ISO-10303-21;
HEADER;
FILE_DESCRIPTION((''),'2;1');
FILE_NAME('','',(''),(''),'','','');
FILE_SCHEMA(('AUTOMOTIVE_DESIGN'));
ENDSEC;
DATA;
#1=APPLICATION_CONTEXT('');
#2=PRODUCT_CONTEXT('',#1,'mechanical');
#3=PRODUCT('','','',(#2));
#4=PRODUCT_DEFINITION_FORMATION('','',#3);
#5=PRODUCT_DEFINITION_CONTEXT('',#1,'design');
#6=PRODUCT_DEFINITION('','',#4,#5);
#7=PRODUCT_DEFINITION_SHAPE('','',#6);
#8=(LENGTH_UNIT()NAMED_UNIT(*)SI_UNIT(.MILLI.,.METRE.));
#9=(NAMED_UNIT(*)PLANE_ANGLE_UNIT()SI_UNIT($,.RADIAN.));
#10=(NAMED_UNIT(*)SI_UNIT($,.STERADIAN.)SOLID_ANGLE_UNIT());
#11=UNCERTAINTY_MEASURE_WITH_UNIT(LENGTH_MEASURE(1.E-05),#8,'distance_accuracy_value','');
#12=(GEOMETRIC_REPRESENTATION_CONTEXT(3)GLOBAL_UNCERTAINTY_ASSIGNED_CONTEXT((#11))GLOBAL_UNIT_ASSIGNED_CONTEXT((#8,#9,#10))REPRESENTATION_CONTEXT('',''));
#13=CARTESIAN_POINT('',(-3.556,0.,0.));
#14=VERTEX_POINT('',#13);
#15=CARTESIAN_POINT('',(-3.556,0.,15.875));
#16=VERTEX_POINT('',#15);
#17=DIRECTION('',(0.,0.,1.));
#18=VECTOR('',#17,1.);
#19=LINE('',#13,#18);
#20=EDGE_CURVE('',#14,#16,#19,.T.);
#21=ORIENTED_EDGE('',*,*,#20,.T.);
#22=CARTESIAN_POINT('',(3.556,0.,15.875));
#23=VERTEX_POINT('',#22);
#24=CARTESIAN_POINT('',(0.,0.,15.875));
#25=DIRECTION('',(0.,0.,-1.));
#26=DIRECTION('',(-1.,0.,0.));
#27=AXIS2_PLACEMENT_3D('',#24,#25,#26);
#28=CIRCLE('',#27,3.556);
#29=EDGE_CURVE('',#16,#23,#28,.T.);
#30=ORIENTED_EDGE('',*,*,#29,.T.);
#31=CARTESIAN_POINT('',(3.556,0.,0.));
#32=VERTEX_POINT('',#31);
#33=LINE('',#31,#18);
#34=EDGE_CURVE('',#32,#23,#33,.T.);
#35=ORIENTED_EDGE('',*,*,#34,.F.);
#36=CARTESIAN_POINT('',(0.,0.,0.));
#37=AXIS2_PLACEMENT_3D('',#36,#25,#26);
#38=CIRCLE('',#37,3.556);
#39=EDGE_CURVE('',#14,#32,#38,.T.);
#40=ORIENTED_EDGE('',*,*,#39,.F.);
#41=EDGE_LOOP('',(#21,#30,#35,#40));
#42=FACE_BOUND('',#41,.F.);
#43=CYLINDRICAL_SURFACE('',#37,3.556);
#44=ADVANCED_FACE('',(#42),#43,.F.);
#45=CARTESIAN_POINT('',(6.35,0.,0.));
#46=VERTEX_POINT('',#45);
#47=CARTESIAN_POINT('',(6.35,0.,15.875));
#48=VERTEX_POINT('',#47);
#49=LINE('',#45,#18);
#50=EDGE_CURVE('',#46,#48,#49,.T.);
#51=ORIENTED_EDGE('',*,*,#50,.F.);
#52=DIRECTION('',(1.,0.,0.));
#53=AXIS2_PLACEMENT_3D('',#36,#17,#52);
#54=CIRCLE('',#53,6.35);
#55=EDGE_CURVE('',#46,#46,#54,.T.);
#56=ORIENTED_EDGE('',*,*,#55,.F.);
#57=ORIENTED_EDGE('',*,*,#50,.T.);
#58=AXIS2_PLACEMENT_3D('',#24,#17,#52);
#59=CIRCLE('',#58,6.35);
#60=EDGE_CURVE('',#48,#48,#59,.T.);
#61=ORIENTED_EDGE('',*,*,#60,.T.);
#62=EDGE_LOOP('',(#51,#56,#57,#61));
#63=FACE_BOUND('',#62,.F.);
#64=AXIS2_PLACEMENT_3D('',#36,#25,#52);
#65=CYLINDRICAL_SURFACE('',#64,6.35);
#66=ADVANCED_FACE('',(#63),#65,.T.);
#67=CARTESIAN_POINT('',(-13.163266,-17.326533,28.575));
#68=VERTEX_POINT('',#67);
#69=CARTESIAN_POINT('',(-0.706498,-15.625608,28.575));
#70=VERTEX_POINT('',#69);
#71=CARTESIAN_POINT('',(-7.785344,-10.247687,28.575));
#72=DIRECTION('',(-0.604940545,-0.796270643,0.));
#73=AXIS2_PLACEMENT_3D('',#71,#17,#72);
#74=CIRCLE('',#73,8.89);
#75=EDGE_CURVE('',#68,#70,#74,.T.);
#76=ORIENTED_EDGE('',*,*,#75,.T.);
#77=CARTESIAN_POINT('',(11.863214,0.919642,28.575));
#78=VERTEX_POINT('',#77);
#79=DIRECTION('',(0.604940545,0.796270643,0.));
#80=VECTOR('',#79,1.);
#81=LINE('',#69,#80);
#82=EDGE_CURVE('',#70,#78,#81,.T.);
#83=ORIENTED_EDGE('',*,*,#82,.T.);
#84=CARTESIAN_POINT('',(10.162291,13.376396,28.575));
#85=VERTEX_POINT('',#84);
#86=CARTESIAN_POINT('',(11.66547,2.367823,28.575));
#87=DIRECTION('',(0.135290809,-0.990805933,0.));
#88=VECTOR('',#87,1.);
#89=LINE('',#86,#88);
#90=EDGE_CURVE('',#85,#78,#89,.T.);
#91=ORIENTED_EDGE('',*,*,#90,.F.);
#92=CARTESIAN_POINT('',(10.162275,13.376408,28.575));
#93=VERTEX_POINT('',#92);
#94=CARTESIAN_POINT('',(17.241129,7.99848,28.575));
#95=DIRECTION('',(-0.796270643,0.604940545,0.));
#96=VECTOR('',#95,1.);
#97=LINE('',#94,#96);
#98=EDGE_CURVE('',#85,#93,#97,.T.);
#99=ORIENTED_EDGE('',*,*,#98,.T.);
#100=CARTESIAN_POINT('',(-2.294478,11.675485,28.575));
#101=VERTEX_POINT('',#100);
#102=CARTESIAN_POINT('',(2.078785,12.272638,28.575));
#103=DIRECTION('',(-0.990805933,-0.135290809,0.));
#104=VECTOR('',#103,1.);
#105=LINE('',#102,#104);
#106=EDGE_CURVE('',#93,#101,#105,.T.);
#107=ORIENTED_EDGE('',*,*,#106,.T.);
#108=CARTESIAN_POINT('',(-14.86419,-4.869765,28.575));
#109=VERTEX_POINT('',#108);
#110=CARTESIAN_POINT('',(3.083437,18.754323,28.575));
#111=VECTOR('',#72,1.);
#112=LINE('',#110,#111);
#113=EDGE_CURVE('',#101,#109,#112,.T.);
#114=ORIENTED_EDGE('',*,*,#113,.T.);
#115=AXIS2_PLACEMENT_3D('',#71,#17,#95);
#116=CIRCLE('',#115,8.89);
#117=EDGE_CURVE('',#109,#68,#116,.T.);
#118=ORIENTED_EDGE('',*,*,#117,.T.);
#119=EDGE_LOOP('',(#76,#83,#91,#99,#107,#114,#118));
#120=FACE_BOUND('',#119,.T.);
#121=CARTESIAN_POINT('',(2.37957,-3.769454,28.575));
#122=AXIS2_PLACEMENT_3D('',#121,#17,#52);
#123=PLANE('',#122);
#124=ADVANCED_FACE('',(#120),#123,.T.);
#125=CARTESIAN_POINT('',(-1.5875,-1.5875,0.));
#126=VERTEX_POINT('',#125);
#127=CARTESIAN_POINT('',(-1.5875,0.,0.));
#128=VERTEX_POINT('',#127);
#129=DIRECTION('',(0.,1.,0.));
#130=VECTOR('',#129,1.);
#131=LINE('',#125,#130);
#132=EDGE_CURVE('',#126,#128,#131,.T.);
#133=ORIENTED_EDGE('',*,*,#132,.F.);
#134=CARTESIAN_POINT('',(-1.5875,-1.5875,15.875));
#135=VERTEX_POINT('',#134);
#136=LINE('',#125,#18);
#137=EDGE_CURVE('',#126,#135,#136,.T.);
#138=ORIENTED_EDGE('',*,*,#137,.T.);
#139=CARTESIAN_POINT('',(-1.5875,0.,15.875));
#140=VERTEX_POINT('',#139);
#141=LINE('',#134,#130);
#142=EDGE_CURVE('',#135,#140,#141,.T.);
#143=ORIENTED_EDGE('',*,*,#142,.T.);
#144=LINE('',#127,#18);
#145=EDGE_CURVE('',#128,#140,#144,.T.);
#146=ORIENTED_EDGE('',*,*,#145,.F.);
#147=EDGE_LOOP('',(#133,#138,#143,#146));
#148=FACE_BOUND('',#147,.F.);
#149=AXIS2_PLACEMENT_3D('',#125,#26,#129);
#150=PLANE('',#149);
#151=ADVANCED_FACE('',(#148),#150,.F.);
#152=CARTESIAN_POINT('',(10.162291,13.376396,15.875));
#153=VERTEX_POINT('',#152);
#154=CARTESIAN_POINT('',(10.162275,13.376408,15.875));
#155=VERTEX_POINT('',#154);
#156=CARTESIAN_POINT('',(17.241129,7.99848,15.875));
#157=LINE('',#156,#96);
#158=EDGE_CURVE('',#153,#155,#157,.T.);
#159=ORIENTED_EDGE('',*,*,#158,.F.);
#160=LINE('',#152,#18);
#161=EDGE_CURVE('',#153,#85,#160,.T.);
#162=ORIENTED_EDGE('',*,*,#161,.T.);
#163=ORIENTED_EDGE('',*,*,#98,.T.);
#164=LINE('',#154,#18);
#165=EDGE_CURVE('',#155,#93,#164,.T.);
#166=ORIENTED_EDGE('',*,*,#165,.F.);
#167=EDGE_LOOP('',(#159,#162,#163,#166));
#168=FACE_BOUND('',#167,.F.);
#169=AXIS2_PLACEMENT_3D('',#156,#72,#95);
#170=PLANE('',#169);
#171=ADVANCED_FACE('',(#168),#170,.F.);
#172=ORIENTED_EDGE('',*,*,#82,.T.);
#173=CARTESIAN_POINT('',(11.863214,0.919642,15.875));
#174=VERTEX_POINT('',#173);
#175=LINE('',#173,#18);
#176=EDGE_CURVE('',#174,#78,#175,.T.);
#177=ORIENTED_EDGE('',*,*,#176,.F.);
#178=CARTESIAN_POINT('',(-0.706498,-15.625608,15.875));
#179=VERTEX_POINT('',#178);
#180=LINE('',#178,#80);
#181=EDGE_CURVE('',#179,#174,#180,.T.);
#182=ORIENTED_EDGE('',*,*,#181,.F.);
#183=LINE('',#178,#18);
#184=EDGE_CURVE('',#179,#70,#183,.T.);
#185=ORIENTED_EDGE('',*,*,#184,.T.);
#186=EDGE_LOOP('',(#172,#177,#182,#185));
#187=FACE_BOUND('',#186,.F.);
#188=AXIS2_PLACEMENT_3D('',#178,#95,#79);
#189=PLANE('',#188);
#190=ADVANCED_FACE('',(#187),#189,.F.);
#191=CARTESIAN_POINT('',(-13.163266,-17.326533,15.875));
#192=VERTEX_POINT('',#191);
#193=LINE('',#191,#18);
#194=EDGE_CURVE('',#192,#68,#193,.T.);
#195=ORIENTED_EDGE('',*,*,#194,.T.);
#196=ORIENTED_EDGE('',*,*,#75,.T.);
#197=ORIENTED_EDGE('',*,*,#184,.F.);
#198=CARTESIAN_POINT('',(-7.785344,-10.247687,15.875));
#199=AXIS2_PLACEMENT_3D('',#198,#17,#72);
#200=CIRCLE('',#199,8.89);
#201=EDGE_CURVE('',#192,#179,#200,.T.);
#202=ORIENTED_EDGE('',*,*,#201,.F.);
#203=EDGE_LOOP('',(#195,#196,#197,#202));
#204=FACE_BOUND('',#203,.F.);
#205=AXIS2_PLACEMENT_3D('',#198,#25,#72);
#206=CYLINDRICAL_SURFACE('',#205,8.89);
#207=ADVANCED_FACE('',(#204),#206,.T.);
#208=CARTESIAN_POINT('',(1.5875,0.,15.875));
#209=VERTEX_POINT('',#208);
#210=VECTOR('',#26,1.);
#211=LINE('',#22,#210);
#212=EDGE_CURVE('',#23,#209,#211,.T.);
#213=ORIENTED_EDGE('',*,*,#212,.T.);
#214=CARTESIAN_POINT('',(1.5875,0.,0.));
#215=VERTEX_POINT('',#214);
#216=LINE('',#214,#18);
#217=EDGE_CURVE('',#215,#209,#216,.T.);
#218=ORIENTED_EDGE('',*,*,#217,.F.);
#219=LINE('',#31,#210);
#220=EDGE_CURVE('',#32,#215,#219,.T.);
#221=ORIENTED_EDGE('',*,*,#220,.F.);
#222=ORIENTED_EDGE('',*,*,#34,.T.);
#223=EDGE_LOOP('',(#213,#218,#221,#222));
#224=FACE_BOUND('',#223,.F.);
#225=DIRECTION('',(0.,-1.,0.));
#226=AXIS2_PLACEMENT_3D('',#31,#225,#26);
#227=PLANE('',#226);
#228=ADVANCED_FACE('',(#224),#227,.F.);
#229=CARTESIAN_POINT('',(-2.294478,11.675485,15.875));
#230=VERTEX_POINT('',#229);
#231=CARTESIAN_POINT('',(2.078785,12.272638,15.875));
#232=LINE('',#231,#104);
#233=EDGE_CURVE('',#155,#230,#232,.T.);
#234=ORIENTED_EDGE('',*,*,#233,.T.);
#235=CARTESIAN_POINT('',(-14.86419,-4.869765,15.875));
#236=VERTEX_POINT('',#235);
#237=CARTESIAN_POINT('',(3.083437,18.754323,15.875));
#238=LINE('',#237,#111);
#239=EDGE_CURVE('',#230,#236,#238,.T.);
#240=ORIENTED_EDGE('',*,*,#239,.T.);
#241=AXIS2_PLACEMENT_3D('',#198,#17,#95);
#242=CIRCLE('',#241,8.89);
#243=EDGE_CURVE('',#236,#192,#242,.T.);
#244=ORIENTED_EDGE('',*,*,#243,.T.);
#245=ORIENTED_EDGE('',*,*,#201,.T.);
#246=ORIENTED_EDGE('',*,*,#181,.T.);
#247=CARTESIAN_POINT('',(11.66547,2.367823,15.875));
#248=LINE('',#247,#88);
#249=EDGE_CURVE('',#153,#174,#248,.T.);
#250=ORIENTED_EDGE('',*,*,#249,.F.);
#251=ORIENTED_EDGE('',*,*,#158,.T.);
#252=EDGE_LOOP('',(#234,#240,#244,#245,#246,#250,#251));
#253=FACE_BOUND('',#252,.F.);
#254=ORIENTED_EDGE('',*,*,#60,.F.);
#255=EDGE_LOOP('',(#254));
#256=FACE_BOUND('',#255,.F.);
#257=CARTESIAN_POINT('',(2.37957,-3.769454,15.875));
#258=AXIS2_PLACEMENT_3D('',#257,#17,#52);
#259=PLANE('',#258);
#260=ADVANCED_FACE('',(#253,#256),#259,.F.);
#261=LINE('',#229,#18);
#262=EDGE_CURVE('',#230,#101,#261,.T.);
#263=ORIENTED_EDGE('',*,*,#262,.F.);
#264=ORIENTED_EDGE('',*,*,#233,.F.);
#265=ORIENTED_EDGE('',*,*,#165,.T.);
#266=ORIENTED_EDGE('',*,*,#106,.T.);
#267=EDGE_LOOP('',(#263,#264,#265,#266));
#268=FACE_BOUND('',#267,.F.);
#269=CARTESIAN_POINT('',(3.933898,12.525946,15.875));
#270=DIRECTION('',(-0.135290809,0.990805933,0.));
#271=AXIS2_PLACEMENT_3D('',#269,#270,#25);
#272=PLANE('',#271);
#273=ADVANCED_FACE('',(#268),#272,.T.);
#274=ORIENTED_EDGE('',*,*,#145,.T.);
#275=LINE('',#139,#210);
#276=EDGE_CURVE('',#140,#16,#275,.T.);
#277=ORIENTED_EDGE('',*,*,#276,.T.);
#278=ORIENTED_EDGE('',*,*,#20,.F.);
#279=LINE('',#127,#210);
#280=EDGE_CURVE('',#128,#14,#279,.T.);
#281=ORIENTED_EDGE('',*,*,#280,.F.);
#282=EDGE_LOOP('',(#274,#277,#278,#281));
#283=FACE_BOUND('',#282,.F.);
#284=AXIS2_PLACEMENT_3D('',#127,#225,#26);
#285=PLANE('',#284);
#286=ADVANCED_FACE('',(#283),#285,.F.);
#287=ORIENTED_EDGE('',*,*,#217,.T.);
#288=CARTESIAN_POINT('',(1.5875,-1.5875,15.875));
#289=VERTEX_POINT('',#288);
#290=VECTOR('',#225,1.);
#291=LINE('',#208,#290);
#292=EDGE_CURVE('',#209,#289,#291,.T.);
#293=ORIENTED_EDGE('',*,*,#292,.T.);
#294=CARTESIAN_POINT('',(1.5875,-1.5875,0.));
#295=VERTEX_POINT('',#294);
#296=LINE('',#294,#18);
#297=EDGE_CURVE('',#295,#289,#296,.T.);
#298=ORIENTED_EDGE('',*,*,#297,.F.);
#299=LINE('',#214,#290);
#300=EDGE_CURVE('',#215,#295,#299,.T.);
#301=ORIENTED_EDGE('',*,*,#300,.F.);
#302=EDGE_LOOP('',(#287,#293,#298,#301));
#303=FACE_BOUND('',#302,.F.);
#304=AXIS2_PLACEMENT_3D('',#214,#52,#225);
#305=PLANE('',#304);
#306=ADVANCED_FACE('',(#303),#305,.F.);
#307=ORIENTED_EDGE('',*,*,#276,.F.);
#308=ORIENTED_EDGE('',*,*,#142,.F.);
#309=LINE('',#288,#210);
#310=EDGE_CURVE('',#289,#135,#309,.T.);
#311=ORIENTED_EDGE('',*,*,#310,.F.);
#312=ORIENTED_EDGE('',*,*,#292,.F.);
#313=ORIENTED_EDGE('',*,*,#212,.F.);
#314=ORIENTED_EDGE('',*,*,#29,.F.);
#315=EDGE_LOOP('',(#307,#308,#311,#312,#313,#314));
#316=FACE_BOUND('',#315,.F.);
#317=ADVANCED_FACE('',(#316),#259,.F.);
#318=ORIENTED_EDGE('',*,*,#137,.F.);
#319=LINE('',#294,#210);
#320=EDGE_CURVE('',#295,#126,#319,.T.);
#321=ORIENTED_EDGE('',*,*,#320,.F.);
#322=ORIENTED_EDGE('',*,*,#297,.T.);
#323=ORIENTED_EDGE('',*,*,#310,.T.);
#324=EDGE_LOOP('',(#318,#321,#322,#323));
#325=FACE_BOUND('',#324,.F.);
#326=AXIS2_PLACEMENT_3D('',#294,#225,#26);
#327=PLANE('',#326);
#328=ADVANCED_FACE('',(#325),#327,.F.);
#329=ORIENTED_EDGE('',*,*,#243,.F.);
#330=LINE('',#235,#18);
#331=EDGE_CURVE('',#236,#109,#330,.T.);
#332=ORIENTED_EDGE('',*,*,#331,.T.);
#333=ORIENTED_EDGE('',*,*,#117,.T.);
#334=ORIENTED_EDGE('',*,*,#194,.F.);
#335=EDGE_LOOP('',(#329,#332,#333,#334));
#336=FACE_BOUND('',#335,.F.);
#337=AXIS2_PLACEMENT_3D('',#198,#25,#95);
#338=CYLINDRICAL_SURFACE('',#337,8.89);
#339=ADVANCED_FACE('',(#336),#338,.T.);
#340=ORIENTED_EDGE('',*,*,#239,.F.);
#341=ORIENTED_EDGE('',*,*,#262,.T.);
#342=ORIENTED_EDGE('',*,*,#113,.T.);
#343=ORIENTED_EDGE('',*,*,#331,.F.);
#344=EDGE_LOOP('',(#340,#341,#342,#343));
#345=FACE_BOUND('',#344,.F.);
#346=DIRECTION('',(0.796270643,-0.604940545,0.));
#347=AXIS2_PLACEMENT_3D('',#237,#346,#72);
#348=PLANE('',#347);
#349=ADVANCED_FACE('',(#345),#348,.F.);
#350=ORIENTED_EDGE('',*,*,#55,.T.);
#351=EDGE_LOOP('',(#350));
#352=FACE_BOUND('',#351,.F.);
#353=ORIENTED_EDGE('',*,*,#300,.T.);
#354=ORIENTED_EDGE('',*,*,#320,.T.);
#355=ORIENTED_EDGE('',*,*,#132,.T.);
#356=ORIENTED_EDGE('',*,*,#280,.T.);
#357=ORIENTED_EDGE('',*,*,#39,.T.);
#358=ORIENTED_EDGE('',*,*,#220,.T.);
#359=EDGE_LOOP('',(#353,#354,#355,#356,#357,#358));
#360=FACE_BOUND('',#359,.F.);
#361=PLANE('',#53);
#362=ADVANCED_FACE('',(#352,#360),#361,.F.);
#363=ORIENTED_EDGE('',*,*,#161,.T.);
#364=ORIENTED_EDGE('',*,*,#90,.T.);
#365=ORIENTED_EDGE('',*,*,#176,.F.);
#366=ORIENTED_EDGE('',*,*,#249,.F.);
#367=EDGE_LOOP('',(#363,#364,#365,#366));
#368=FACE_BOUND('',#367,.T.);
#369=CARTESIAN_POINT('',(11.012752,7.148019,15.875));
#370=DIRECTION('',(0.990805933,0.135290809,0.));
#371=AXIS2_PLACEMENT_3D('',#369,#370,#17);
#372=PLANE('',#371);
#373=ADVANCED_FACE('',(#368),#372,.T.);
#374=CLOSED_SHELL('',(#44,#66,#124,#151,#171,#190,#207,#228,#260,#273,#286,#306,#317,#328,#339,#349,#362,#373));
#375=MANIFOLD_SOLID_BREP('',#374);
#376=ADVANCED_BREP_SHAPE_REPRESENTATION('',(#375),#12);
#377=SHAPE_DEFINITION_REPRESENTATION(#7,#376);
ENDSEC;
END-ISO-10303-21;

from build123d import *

# Parameters (mm, degrees)
F0_R     = 6.35
F1_DEPTH = 15.875
F3_DEPTH = 12.7
F4_SIZE  = 8.88999


# Not quite as in the source:
# - a fillet or chamfer is up to 0.001 mm smaller than in the source, because OpenCascade refuses the exact size


with BuildPart() as f1:
    # F0 (on Top) → F1 (new body)
    with BuildSketch(Plane.XY):
        Circle(F0_R)
        with BuildLine():
            Line((-1.5875, 0), (-3.556, 0))
            ThreePointArc((-3.556, 0), (0, 3.556), (3.556, 0))
            Line((3.556, 0), (1.5875, 0))
            Line((1.5875, 0), (1.5875, -1.5875))
            Line((1.5875, -1.5875), (-1.5875, -1.5875))
            Line((-1.5875, -1.5875), (-1.5875, 0))
        make_face(mode=Mode.SUBTRACT)
    extrude(amount=F1_DEPTH)

    # F2 (on face) → F3 (join)
    with BuildSketch(Plane.XY.offset(15.875)):
        with BuildLine():
            Line((17.2411291662, 7.9984802525), (10.162283151, 13.3764016998))
            Line((10.162283151, 13.3764016998), (-13.1632656924, -17.3265325287))
            ThreePointArc((-13.1632656924, -17.3265325287), (-6.5826089488, -19.0559512579), (-0.7064982299, -15.6256079608))
            Line((-0.7064982299, -15.6256079608), (17.2411291662, 7.9984802525))
        make_face()
        with BuildLine():
            Line((-13.1632656924, -17.3265325287), (10.162283151, 13.3764016998))
            Line((10.162283151, 13.3764016998), (3.0834371358, 18.7543231471))
            Line((3.0834371358, 18.7543231471), (-14.8641902603, -4.8697650662))
            ThreePointArc((-14.8641902603, -4.8697650662), (-16.5936089895, -11.4504218098), (-13.1632656924, -17.3265325287))
        make_face()
    extrude(amount=F3_DEPTH)

    # F4 (size 8.89 in the source; OpenCascade refuses exactly that, so slightly less here)
    f4_edges = [f1.edges().sort_by_distance(p)[0] for p in [
        (3.083437, 18.754323, 22.225),
        (17.241129, 7.99848, 22.225),
    ]]
    chamfer(f4_edges, length=F4_SIZE)


solid = f1.part
